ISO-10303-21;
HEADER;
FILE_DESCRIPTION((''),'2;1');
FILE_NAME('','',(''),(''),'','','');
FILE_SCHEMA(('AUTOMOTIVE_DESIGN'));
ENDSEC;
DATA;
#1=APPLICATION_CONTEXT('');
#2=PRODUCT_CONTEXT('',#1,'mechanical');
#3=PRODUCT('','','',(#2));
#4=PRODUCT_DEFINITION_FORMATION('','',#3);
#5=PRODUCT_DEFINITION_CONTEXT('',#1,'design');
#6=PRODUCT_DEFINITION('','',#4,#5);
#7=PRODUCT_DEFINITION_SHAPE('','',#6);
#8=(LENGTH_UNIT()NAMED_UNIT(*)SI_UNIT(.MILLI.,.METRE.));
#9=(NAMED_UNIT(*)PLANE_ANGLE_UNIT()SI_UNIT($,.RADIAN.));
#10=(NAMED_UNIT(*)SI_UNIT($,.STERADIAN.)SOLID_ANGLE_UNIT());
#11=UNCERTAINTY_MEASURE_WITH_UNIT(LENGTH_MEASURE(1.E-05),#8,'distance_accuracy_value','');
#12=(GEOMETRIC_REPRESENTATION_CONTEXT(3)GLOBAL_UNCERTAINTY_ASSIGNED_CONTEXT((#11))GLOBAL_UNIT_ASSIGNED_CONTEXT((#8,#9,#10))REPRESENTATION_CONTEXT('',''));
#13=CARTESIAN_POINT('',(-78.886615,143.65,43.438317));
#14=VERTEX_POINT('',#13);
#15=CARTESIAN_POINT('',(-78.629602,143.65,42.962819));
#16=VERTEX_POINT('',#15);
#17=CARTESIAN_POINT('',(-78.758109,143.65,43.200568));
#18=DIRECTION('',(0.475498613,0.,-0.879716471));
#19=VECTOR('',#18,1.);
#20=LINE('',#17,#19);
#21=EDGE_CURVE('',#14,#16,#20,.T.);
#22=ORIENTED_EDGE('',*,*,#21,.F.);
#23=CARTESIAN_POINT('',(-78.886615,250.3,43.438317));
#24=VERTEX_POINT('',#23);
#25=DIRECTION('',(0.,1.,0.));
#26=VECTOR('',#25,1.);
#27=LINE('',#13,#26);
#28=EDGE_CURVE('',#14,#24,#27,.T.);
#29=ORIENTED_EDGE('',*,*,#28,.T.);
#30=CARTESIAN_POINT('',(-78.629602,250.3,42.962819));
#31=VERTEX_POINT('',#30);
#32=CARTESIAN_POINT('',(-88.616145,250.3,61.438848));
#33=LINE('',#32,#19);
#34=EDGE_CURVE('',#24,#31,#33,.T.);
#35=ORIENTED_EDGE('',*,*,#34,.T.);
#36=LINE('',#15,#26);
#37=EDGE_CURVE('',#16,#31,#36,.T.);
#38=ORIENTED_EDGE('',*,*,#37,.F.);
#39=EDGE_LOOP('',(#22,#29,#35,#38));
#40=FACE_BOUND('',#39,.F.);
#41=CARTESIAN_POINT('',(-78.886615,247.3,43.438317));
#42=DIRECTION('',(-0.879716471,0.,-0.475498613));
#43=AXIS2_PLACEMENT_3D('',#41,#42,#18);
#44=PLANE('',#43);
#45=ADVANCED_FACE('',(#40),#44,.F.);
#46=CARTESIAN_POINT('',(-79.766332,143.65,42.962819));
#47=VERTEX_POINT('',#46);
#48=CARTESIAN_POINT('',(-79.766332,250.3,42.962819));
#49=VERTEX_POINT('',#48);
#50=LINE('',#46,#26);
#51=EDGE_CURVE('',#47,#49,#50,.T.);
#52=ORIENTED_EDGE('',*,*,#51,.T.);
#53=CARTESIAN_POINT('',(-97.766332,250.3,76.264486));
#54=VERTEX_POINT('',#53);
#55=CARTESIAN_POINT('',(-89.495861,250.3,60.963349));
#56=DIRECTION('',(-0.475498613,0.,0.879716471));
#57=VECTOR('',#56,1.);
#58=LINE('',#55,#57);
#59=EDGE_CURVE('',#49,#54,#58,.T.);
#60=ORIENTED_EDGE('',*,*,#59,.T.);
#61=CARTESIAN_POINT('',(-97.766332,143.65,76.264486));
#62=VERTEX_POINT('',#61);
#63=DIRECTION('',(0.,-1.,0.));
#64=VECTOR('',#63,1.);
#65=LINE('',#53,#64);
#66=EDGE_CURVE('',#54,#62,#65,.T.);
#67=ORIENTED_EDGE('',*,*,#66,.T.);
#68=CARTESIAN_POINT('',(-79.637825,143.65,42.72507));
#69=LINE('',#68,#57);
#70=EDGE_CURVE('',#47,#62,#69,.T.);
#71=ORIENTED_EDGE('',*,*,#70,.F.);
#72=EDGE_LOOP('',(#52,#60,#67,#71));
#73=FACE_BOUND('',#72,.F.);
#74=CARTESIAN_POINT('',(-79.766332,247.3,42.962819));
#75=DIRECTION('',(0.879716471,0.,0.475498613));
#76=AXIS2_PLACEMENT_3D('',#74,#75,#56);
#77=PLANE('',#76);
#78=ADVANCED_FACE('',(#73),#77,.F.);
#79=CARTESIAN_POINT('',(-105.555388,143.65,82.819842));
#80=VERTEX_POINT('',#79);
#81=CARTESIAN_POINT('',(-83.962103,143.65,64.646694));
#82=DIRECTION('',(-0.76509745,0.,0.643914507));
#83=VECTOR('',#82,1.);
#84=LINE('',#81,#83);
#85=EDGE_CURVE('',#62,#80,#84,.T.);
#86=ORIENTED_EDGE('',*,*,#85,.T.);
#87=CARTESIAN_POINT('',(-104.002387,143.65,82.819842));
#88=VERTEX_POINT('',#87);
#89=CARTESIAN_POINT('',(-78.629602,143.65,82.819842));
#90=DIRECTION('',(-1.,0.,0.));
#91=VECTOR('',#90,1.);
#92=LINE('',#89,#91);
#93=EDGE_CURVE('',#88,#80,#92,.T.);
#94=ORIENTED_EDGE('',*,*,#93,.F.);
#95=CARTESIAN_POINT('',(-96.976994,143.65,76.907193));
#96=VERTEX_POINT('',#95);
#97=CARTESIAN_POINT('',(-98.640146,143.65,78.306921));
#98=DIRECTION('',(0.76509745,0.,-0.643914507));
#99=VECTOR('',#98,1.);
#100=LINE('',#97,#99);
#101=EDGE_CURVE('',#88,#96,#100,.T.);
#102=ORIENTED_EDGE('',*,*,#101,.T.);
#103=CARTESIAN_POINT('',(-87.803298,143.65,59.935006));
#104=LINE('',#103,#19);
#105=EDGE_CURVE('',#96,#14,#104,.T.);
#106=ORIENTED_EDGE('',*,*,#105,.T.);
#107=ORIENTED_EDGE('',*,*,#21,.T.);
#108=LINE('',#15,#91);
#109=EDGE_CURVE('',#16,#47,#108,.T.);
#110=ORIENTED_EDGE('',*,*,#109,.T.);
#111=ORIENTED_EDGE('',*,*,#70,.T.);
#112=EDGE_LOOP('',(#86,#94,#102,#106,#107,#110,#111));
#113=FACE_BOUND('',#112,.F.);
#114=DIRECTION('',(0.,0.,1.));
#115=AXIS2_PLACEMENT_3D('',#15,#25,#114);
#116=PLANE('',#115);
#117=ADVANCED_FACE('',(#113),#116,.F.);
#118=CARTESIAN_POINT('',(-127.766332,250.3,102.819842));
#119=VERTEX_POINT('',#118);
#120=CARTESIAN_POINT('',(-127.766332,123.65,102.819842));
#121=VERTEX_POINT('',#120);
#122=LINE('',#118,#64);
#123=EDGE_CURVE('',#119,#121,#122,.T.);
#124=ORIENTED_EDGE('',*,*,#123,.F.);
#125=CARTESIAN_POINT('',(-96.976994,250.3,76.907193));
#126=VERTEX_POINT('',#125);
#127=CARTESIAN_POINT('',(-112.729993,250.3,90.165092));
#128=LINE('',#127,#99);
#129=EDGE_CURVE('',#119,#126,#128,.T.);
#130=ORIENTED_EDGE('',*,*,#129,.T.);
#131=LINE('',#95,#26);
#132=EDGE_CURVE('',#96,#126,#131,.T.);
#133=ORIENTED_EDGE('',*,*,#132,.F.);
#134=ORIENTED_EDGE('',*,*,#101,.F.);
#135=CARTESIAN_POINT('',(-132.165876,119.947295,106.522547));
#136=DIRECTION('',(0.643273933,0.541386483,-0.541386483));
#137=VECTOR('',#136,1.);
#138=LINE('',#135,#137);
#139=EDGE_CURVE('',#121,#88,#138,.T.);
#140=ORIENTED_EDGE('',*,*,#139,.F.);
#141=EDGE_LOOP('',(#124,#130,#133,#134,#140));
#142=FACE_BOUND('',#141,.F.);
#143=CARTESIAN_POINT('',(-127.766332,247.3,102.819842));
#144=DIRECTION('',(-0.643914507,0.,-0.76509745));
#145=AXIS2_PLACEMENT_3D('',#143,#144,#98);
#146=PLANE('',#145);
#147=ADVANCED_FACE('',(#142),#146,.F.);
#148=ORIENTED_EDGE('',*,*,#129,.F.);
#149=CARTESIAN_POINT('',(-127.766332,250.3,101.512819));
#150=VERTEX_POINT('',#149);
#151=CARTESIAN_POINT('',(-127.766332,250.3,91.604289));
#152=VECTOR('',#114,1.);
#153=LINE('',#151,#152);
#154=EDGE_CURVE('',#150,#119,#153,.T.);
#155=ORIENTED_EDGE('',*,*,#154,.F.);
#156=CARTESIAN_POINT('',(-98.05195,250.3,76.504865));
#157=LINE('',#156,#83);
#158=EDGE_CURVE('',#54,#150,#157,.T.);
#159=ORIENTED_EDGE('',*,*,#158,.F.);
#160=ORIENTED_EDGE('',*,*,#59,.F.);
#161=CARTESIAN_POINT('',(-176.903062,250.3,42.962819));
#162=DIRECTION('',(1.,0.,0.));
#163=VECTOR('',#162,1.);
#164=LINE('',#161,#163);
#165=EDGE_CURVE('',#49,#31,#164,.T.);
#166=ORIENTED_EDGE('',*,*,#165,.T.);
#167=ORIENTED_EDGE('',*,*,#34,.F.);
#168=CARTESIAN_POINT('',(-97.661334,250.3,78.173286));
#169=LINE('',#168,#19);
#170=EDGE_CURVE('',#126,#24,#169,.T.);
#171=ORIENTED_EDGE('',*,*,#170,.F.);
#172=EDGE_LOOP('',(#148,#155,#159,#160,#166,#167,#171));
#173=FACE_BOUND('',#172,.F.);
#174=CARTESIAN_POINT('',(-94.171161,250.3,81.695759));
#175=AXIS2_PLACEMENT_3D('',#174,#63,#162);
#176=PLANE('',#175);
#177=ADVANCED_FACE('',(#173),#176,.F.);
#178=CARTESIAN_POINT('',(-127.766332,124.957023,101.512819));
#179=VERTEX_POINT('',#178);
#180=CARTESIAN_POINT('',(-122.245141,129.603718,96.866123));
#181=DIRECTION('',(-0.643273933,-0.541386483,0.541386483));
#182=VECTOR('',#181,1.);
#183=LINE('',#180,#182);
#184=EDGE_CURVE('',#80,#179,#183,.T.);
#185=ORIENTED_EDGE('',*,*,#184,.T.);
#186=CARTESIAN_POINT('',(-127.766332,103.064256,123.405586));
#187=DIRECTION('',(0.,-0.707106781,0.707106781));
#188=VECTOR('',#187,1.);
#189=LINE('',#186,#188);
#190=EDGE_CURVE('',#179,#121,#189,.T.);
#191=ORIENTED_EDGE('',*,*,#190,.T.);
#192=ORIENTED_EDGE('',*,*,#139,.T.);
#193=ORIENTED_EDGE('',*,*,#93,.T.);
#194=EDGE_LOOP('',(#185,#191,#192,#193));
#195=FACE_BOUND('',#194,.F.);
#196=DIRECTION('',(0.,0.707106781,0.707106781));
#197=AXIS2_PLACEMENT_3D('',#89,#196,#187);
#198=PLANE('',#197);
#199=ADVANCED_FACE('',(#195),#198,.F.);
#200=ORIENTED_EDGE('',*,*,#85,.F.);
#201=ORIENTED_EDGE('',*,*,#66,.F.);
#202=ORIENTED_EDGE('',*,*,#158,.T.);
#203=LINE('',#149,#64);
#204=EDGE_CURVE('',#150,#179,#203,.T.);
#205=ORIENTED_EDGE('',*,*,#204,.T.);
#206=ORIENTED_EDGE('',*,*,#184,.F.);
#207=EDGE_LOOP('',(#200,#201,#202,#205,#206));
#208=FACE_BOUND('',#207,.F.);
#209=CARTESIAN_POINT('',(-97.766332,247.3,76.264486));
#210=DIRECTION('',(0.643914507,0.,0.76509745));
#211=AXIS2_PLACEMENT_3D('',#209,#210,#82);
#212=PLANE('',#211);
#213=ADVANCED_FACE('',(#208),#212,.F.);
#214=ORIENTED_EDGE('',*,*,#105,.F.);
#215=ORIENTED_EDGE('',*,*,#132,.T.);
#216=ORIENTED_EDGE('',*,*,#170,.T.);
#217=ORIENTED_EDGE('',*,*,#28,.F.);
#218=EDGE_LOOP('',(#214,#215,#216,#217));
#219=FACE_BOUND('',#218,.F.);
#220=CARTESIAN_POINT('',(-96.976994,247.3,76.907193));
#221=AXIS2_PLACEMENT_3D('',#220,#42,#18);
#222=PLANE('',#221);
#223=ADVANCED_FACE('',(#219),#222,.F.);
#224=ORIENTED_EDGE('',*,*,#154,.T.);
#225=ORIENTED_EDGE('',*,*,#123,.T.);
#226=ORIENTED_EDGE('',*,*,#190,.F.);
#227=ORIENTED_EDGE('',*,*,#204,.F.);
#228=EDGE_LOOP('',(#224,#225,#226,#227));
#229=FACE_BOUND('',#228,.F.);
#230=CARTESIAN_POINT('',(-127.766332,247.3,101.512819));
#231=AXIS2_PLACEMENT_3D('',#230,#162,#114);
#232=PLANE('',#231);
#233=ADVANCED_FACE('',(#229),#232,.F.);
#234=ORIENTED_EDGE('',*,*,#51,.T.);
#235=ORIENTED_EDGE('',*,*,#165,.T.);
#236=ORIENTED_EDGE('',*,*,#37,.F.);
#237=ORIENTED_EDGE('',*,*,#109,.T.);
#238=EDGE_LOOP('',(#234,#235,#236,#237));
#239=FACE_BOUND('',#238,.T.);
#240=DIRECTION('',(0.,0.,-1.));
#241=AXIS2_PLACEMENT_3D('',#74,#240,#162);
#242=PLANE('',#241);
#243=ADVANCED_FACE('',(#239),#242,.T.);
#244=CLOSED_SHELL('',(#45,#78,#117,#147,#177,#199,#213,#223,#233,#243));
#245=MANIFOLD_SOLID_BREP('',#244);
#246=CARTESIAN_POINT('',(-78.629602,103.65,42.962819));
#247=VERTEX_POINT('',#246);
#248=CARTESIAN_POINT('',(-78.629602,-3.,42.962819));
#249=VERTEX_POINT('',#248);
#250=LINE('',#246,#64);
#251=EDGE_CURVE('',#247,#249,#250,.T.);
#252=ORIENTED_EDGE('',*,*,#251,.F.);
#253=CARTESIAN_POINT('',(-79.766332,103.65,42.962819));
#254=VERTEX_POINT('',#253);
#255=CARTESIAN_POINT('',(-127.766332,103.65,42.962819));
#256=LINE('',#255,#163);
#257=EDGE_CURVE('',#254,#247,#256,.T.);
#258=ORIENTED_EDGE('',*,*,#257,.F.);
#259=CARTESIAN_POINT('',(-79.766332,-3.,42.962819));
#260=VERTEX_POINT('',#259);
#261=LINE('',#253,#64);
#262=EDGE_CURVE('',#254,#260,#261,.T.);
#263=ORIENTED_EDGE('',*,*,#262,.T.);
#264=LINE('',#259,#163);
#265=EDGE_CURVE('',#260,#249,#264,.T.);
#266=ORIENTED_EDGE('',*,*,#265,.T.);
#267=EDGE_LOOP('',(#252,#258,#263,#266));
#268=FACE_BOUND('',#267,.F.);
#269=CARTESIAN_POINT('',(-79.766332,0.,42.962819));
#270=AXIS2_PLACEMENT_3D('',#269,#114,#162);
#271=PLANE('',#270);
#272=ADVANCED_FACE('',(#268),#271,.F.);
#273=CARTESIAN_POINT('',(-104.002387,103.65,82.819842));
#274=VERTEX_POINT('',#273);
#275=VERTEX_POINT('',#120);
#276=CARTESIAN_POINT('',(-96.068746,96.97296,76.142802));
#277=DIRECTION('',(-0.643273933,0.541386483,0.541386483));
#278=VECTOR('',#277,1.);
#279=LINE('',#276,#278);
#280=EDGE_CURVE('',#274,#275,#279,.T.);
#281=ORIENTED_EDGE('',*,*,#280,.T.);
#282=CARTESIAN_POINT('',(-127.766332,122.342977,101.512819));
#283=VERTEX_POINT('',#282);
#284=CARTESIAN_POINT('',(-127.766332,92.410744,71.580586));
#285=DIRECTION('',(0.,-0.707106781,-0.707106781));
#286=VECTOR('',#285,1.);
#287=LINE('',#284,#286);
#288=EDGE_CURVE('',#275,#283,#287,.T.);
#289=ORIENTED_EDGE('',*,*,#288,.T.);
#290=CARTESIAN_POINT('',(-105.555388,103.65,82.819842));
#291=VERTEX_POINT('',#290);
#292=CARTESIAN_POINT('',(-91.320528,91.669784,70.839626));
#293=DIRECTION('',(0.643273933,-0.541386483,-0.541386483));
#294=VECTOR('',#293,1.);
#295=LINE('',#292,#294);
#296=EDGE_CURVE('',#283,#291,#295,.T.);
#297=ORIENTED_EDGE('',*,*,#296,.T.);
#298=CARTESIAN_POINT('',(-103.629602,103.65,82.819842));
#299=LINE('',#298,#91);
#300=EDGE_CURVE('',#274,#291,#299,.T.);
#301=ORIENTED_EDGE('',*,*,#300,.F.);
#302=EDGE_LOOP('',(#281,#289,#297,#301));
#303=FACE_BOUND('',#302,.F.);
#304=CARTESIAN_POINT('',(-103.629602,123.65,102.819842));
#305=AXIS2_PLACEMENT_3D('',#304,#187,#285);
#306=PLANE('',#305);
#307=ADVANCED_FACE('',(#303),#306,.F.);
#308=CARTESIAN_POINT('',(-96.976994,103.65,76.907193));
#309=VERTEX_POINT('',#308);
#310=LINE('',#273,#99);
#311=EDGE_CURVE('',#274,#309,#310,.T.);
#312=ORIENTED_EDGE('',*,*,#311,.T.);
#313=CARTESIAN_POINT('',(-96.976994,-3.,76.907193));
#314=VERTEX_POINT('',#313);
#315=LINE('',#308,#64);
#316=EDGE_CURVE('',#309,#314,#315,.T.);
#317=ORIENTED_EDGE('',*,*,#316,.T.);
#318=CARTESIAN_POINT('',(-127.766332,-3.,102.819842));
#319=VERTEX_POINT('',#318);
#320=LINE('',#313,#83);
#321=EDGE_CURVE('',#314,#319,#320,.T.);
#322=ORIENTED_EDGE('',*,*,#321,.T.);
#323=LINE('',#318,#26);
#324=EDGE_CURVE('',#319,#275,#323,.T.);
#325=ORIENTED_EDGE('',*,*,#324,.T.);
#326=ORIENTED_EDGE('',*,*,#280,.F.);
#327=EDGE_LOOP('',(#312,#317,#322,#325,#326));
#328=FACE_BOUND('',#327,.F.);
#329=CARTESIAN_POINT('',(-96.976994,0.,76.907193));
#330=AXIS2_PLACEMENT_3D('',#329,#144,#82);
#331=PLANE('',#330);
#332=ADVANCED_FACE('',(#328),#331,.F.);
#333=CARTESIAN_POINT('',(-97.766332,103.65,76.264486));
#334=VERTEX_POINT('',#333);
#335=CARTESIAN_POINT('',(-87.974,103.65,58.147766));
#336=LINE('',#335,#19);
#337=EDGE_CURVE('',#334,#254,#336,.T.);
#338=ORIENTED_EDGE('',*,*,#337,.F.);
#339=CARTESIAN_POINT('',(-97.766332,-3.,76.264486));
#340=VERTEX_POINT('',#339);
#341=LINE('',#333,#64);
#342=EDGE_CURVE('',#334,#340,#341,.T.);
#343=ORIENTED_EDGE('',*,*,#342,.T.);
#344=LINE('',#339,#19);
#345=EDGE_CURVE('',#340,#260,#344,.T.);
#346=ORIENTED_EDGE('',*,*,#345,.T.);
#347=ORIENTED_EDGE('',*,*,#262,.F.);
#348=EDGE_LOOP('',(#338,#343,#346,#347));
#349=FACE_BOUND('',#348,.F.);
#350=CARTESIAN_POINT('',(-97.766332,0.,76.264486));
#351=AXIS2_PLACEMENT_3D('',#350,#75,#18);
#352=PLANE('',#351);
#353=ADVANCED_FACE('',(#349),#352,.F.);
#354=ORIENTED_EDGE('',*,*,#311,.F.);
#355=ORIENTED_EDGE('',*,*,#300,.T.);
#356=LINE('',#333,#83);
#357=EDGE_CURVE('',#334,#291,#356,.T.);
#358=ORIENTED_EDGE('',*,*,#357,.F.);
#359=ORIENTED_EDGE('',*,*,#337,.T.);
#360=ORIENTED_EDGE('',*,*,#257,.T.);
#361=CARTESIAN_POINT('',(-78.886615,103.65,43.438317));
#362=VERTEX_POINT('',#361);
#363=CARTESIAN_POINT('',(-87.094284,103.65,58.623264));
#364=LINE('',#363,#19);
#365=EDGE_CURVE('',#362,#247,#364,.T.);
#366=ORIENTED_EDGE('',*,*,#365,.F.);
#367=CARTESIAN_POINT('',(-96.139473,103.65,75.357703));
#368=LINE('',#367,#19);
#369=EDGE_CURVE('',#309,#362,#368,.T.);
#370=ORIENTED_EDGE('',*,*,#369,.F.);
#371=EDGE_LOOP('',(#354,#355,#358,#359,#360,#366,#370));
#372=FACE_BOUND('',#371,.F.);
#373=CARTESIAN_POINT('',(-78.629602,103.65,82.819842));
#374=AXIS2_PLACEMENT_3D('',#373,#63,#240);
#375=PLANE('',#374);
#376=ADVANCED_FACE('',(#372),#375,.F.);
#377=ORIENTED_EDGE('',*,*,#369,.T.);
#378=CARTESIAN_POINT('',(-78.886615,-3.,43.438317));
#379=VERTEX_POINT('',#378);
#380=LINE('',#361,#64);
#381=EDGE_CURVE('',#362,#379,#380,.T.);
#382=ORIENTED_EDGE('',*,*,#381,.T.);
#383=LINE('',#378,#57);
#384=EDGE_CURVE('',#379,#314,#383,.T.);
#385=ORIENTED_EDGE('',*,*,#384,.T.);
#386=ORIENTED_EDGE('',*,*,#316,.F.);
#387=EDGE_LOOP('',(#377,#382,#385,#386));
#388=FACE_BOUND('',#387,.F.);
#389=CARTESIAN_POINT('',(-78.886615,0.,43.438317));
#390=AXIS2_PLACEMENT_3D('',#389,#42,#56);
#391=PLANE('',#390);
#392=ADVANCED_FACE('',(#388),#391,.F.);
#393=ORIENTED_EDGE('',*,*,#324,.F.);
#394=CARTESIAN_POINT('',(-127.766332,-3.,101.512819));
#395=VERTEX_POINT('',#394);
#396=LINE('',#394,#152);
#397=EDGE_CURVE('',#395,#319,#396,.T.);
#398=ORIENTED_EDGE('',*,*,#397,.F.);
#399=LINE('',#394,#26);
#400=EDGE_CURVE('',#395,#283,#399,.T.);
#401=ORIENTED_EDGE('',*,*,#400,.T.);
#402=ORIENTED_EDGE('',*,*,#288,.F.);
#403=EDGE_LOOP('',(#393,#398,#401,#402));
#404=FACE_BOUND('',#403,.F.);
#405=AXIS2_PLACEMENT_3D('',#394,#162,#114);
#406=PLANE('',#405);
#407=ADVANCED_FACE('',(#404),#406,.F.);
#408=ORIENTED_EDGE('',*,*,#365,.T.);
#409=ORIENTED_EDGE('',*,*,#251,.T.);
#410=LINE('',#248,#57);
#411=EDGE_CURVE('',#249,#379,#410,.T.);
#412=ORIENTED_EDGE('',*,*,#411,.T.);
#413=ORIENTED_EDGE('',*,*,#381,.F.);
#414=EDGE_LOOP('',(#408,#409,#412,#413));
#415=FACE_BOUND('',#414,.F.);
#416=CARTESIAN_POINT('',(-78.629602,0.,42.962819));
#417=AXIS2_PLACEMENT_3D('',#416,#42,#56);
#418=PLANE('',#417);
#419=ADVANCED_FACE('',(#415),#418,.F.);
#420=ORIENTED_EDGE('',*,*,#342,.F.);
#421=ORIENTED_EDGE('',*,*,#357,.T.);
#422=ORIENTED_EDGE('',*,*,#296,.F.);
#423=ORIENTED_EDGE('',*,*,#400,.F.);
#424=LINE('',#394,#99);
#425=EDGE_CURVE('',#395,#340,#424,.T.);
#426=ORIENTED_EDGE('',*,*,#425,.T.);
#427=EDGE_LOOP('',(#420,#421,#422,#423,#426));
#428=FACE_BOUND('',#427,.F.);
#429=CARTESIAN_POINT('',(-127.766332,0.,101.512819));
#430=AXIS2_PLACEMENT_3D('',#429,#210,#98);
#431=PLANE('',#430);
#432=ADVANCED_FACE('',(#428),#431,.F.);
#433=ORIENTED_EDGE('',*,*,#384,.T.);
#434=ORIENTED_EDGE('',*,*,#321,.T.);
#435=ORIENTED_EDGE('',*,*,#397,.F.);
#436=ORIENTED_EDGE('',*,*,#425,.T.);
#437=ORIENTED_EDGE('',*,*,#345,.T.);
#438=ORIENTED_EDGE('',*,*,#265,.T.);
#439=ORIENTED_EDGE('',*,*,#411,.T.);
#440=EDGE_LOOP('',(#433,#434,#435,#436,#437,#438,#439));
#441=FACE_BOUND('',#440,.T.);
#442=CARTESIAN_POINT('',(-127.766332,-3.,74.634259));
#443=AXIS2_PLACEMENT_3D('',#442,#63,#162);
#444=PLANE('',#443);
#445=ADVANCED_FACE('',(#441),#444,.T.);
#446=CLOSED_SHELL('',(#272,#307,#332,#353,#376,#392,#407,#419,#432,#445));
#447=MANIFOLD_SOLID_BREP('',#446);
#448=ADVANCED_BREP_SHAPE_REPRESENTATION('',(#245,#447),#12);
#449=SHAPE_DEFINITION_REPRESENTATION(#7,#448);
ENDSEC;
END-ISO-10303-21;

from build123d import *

# Parameters (mm, degrees)
F1_DEPTH  = 247.3
F3_DEPTH  = 300
F4_DEPTH  = 61.9
F5_DEPTH  = 40
F7_DEPTH  = 300
F8_DEPTH  = 300
F10_DEPTH = 300
F11_DEPTH = 25
F12_DEPTH = 71.4
F13_DEPTH = 3
F14_DEPTH = 65.7
F15_DEPTH = 82.2
F2_W      = 20
F2_H      = 39.8570230463
F16_DEPTH = 52.6
F17_DEPTH = 121.6
F18_DEPTH = 3
F20_DEPTH = 25


# Not quite as in the source:
# - a feature of the source that left no trace in its solid (it failed there, or was rolled back) is left out
# - a feature names something its author has since deleted; it is built from what else it names


with BuildPart() as f1:
    # F0 (on Front) → F1 (new body)
    with BuildSketch(Plane.XZ):
        Polygon((-78.8866152354, 43.4383174348), (-78.6296018241, 42.9628188217), (-78.6296018241, 102.819841868), (-127.7663317061, 102.819841868), (-96.9769939736, 76.9071934711), align=None)
        Polygon((-79.7663317061, 42.9628188217), (-97.7663317061, 76.264485822), (-127.7663317061, 101.5128188217), (-157.7663317061, 76.264485822), (-175.7663317061, 42.9628188217), align=None)
        Polygon((-127.7663317061, 101.5128188217), (-97.7663317061, 76.264485822), (-79.7663317061, 42.9628188217), (-78.6296018241, 42.9628188217), (-78.8866152354, 43.4383174348), (-96.9769939736, 76.9071934711), (-127.7663317061, 102.819841868), (-158.5556694386, 76.9071934711), (-176.9030615881, 42.9628188217), (-175.7663317061, 42.9628188217), (-157.7663317061, 76.264485822), align=None)
        Polygon((-176.9030615881, 102.819841868), (-176.9030615881, 42.9628188217), (-158.5556694386, 76.9071934711), (-127.7663317061, 102.819841868), align=None)
    extrude(amount=-F1_DEPTH)

    # F0 (on Front) → F3 (cut)
    with BuildSketch(Plane.XZ):
        Polygon((-78.8866152354, 43.4383174348), (-78.6296018241, 42.9628188217), (-78.6296018241, 102.819841868), (-127.7663317061, 102.819841868), (-96.9769939736, 76.9071934711), align=None)
    extrude(amount=-F3_DEPTH, mode=Mode.SUBTRACT)

    # F2 (on face) → F4 (join)
    with BuildSketch(Plane.YZ.offset(-78.6296018241)):
        Polygon((123.65, 84.6090763807), (123.65, 102.819841868), (103.65, 82.819841868), (123.65, 82.819841868), align=None)
    extrude(amount=-F4_DEPTH)

    # F5 (add): a face of the model
    f5_faces = [f1.faces().sort_by_distance(p)[0] for p in [
        (-91.3159942007, 113.65, 82.819841868),
    ]]
    extrude(f5_faces, amount=F5_DEPTH)

    # F0 (on Front) → F7 (cut)
    with BuildSketch(Plane.XZ):
        Polygon((-79.7663317061, 42.9628188217), (-97.7663317061, 76.264485822), (-127.7663317061, 101.5128188217), (-157.7663317061, 76.264485822), (-175.7663317061, 42.9628188217), align=None)
    extrude(amount=-F7_DEPTH, mode=Mode.SUBTRACT)

    # F0 (on Front) → F8 (cut)
    with BuildSketch(Plane.XZ):
        Polygon((-176.9030615881, 102.819841868), (-176.9030615881, 42.9628188217), (-158.5556694386, 76.9071934711), (-127.7663317061, 102.819841868), align=None)
    extrude(amount=-F8_DEPTH, mode=Mode.SUBTRACT)

    # F9 (on face) → F10 (cut)
    with BuildSketch(Plane.XZ):
        Polygon((-127.7663317061, 101.5128188217), (-127.7663317061, 102.819841868), (-158.5556694386, 76.9071934711), (-176.9030615881, 42.9628188217), (-175.7663317061, 42.9628188217), (-157.7663317061, 76.264485822), align=None)
    extrude(amount=-F10_DEPTH, mode=Mode.SUBTRACT)

    # F11 (cut): a face of the model
    f11_faces = [f1.faces().sort_by_distance(p)[0] for p in [
        (-78.6296018241, 114.3166666667, 68.1531752014),
    ]]
    extrude(f11_faces, amount=-F11_DEPTH, mode=Mode.SUBTRACT)

    # F12 (cut): faces of the model
    f12_faces = [f1.faces().sort_by_distance(p)[0] for p in [
        (-103.6296018241, 116.5184290192, 88.4436749614),
        (-103.6296018241, 113.65, 42.8913303449),
    ]]
    extrude(f12_faces, amount=-F12_DEPTH, mode=Mode.SUBTRACT)

    # F0 (on Front) → F13 (join)
    with BuildSketch(Plane.XZ):
        Polygon((-127.7663317061, 101.5128188217), (-97.7663317061, 76.264485822), (-79.7663317061, 42.9628188217), (-78.6296018241, 42.9628188217), (-78.8866152354, 43.4383174348), (-96.9769939736, 76.9071934711), (-127.7663317061, 102.819841868), (-158.5556694386, 76.9071934711), (-176.9030615881, 42.9628188217), (-175.7663317061, 42.9628188217), (-157.7663317061, 76.264485822), align=None)
    extrude(amount=F13_DEPTH)

    # F2 (on face) → F14 (join)
    with BuildSketch(Plane.YZ.offset(-78.6296018241)):
        Polygon((143.65, 82.819841868), (123.65, 102.819841868), (123.65, 84.6090763807), (123.65, 82.819841868), align=None)
    extrude(amount=-F14_DEPTH)

    # F2 (on face) → F15 (cut)
    with BuildSketch(Plane.YZ.offset(-78.6296018241)):
        Polygon((143.65, 82.819841868), (123.65, 102.819841868), (123.65, 84.6090763807), (123.65, 82.819841868), align=None)
    extrude(amount=-F15_DEPTH, mode=Mode.SUBTRACT)

    # F2 (on face) → F16 (join)
    with BuildSketch(Plane.YZ.offset(-78.6296018241)):
        with Locations((133.65, 62.8913303449)):
            Rectangle(F2_W, F2_H)
    extrude(amount=-F16_DEPTH)

    # F2 (on face) → F17 (cut)
    with BuildSketch(Plane.YZ.offset(-78.6296018241)):
        with Locations((133.65, 62.8913303449)):
            Rectangle(F2_W, F2_H)
    extrude(amount=-F17_DEPTH, mode=Mode.SUBTRACT)

    # F18 (add): a face of the model
    f18_faces = [f1.faces().sort_by_distance(p)[0] for p in [
        (-112.8703238632, 247.3, 89.2710100097),
    ]]
    extrude(f18_faces, amount=F18_DEPTH)

    # F19 (on face) → F20 (cut)
    with BuildSketch(Plane.XZ.offset(3)):
        Polygon((-127.7663317061, 101.5128188217), (-127.7663317061, 102.819841868), (-158.5556694386, 76.9071934711), (-176.9030615881, 42.9628188217), (-175.7663317061, 42.9628188217), (-157.7663317061, 76.264485822), align=None)
    extrude(amount=-F20_DEPTH, mode=Mode.SUBTRACT)


solid = f1.part
